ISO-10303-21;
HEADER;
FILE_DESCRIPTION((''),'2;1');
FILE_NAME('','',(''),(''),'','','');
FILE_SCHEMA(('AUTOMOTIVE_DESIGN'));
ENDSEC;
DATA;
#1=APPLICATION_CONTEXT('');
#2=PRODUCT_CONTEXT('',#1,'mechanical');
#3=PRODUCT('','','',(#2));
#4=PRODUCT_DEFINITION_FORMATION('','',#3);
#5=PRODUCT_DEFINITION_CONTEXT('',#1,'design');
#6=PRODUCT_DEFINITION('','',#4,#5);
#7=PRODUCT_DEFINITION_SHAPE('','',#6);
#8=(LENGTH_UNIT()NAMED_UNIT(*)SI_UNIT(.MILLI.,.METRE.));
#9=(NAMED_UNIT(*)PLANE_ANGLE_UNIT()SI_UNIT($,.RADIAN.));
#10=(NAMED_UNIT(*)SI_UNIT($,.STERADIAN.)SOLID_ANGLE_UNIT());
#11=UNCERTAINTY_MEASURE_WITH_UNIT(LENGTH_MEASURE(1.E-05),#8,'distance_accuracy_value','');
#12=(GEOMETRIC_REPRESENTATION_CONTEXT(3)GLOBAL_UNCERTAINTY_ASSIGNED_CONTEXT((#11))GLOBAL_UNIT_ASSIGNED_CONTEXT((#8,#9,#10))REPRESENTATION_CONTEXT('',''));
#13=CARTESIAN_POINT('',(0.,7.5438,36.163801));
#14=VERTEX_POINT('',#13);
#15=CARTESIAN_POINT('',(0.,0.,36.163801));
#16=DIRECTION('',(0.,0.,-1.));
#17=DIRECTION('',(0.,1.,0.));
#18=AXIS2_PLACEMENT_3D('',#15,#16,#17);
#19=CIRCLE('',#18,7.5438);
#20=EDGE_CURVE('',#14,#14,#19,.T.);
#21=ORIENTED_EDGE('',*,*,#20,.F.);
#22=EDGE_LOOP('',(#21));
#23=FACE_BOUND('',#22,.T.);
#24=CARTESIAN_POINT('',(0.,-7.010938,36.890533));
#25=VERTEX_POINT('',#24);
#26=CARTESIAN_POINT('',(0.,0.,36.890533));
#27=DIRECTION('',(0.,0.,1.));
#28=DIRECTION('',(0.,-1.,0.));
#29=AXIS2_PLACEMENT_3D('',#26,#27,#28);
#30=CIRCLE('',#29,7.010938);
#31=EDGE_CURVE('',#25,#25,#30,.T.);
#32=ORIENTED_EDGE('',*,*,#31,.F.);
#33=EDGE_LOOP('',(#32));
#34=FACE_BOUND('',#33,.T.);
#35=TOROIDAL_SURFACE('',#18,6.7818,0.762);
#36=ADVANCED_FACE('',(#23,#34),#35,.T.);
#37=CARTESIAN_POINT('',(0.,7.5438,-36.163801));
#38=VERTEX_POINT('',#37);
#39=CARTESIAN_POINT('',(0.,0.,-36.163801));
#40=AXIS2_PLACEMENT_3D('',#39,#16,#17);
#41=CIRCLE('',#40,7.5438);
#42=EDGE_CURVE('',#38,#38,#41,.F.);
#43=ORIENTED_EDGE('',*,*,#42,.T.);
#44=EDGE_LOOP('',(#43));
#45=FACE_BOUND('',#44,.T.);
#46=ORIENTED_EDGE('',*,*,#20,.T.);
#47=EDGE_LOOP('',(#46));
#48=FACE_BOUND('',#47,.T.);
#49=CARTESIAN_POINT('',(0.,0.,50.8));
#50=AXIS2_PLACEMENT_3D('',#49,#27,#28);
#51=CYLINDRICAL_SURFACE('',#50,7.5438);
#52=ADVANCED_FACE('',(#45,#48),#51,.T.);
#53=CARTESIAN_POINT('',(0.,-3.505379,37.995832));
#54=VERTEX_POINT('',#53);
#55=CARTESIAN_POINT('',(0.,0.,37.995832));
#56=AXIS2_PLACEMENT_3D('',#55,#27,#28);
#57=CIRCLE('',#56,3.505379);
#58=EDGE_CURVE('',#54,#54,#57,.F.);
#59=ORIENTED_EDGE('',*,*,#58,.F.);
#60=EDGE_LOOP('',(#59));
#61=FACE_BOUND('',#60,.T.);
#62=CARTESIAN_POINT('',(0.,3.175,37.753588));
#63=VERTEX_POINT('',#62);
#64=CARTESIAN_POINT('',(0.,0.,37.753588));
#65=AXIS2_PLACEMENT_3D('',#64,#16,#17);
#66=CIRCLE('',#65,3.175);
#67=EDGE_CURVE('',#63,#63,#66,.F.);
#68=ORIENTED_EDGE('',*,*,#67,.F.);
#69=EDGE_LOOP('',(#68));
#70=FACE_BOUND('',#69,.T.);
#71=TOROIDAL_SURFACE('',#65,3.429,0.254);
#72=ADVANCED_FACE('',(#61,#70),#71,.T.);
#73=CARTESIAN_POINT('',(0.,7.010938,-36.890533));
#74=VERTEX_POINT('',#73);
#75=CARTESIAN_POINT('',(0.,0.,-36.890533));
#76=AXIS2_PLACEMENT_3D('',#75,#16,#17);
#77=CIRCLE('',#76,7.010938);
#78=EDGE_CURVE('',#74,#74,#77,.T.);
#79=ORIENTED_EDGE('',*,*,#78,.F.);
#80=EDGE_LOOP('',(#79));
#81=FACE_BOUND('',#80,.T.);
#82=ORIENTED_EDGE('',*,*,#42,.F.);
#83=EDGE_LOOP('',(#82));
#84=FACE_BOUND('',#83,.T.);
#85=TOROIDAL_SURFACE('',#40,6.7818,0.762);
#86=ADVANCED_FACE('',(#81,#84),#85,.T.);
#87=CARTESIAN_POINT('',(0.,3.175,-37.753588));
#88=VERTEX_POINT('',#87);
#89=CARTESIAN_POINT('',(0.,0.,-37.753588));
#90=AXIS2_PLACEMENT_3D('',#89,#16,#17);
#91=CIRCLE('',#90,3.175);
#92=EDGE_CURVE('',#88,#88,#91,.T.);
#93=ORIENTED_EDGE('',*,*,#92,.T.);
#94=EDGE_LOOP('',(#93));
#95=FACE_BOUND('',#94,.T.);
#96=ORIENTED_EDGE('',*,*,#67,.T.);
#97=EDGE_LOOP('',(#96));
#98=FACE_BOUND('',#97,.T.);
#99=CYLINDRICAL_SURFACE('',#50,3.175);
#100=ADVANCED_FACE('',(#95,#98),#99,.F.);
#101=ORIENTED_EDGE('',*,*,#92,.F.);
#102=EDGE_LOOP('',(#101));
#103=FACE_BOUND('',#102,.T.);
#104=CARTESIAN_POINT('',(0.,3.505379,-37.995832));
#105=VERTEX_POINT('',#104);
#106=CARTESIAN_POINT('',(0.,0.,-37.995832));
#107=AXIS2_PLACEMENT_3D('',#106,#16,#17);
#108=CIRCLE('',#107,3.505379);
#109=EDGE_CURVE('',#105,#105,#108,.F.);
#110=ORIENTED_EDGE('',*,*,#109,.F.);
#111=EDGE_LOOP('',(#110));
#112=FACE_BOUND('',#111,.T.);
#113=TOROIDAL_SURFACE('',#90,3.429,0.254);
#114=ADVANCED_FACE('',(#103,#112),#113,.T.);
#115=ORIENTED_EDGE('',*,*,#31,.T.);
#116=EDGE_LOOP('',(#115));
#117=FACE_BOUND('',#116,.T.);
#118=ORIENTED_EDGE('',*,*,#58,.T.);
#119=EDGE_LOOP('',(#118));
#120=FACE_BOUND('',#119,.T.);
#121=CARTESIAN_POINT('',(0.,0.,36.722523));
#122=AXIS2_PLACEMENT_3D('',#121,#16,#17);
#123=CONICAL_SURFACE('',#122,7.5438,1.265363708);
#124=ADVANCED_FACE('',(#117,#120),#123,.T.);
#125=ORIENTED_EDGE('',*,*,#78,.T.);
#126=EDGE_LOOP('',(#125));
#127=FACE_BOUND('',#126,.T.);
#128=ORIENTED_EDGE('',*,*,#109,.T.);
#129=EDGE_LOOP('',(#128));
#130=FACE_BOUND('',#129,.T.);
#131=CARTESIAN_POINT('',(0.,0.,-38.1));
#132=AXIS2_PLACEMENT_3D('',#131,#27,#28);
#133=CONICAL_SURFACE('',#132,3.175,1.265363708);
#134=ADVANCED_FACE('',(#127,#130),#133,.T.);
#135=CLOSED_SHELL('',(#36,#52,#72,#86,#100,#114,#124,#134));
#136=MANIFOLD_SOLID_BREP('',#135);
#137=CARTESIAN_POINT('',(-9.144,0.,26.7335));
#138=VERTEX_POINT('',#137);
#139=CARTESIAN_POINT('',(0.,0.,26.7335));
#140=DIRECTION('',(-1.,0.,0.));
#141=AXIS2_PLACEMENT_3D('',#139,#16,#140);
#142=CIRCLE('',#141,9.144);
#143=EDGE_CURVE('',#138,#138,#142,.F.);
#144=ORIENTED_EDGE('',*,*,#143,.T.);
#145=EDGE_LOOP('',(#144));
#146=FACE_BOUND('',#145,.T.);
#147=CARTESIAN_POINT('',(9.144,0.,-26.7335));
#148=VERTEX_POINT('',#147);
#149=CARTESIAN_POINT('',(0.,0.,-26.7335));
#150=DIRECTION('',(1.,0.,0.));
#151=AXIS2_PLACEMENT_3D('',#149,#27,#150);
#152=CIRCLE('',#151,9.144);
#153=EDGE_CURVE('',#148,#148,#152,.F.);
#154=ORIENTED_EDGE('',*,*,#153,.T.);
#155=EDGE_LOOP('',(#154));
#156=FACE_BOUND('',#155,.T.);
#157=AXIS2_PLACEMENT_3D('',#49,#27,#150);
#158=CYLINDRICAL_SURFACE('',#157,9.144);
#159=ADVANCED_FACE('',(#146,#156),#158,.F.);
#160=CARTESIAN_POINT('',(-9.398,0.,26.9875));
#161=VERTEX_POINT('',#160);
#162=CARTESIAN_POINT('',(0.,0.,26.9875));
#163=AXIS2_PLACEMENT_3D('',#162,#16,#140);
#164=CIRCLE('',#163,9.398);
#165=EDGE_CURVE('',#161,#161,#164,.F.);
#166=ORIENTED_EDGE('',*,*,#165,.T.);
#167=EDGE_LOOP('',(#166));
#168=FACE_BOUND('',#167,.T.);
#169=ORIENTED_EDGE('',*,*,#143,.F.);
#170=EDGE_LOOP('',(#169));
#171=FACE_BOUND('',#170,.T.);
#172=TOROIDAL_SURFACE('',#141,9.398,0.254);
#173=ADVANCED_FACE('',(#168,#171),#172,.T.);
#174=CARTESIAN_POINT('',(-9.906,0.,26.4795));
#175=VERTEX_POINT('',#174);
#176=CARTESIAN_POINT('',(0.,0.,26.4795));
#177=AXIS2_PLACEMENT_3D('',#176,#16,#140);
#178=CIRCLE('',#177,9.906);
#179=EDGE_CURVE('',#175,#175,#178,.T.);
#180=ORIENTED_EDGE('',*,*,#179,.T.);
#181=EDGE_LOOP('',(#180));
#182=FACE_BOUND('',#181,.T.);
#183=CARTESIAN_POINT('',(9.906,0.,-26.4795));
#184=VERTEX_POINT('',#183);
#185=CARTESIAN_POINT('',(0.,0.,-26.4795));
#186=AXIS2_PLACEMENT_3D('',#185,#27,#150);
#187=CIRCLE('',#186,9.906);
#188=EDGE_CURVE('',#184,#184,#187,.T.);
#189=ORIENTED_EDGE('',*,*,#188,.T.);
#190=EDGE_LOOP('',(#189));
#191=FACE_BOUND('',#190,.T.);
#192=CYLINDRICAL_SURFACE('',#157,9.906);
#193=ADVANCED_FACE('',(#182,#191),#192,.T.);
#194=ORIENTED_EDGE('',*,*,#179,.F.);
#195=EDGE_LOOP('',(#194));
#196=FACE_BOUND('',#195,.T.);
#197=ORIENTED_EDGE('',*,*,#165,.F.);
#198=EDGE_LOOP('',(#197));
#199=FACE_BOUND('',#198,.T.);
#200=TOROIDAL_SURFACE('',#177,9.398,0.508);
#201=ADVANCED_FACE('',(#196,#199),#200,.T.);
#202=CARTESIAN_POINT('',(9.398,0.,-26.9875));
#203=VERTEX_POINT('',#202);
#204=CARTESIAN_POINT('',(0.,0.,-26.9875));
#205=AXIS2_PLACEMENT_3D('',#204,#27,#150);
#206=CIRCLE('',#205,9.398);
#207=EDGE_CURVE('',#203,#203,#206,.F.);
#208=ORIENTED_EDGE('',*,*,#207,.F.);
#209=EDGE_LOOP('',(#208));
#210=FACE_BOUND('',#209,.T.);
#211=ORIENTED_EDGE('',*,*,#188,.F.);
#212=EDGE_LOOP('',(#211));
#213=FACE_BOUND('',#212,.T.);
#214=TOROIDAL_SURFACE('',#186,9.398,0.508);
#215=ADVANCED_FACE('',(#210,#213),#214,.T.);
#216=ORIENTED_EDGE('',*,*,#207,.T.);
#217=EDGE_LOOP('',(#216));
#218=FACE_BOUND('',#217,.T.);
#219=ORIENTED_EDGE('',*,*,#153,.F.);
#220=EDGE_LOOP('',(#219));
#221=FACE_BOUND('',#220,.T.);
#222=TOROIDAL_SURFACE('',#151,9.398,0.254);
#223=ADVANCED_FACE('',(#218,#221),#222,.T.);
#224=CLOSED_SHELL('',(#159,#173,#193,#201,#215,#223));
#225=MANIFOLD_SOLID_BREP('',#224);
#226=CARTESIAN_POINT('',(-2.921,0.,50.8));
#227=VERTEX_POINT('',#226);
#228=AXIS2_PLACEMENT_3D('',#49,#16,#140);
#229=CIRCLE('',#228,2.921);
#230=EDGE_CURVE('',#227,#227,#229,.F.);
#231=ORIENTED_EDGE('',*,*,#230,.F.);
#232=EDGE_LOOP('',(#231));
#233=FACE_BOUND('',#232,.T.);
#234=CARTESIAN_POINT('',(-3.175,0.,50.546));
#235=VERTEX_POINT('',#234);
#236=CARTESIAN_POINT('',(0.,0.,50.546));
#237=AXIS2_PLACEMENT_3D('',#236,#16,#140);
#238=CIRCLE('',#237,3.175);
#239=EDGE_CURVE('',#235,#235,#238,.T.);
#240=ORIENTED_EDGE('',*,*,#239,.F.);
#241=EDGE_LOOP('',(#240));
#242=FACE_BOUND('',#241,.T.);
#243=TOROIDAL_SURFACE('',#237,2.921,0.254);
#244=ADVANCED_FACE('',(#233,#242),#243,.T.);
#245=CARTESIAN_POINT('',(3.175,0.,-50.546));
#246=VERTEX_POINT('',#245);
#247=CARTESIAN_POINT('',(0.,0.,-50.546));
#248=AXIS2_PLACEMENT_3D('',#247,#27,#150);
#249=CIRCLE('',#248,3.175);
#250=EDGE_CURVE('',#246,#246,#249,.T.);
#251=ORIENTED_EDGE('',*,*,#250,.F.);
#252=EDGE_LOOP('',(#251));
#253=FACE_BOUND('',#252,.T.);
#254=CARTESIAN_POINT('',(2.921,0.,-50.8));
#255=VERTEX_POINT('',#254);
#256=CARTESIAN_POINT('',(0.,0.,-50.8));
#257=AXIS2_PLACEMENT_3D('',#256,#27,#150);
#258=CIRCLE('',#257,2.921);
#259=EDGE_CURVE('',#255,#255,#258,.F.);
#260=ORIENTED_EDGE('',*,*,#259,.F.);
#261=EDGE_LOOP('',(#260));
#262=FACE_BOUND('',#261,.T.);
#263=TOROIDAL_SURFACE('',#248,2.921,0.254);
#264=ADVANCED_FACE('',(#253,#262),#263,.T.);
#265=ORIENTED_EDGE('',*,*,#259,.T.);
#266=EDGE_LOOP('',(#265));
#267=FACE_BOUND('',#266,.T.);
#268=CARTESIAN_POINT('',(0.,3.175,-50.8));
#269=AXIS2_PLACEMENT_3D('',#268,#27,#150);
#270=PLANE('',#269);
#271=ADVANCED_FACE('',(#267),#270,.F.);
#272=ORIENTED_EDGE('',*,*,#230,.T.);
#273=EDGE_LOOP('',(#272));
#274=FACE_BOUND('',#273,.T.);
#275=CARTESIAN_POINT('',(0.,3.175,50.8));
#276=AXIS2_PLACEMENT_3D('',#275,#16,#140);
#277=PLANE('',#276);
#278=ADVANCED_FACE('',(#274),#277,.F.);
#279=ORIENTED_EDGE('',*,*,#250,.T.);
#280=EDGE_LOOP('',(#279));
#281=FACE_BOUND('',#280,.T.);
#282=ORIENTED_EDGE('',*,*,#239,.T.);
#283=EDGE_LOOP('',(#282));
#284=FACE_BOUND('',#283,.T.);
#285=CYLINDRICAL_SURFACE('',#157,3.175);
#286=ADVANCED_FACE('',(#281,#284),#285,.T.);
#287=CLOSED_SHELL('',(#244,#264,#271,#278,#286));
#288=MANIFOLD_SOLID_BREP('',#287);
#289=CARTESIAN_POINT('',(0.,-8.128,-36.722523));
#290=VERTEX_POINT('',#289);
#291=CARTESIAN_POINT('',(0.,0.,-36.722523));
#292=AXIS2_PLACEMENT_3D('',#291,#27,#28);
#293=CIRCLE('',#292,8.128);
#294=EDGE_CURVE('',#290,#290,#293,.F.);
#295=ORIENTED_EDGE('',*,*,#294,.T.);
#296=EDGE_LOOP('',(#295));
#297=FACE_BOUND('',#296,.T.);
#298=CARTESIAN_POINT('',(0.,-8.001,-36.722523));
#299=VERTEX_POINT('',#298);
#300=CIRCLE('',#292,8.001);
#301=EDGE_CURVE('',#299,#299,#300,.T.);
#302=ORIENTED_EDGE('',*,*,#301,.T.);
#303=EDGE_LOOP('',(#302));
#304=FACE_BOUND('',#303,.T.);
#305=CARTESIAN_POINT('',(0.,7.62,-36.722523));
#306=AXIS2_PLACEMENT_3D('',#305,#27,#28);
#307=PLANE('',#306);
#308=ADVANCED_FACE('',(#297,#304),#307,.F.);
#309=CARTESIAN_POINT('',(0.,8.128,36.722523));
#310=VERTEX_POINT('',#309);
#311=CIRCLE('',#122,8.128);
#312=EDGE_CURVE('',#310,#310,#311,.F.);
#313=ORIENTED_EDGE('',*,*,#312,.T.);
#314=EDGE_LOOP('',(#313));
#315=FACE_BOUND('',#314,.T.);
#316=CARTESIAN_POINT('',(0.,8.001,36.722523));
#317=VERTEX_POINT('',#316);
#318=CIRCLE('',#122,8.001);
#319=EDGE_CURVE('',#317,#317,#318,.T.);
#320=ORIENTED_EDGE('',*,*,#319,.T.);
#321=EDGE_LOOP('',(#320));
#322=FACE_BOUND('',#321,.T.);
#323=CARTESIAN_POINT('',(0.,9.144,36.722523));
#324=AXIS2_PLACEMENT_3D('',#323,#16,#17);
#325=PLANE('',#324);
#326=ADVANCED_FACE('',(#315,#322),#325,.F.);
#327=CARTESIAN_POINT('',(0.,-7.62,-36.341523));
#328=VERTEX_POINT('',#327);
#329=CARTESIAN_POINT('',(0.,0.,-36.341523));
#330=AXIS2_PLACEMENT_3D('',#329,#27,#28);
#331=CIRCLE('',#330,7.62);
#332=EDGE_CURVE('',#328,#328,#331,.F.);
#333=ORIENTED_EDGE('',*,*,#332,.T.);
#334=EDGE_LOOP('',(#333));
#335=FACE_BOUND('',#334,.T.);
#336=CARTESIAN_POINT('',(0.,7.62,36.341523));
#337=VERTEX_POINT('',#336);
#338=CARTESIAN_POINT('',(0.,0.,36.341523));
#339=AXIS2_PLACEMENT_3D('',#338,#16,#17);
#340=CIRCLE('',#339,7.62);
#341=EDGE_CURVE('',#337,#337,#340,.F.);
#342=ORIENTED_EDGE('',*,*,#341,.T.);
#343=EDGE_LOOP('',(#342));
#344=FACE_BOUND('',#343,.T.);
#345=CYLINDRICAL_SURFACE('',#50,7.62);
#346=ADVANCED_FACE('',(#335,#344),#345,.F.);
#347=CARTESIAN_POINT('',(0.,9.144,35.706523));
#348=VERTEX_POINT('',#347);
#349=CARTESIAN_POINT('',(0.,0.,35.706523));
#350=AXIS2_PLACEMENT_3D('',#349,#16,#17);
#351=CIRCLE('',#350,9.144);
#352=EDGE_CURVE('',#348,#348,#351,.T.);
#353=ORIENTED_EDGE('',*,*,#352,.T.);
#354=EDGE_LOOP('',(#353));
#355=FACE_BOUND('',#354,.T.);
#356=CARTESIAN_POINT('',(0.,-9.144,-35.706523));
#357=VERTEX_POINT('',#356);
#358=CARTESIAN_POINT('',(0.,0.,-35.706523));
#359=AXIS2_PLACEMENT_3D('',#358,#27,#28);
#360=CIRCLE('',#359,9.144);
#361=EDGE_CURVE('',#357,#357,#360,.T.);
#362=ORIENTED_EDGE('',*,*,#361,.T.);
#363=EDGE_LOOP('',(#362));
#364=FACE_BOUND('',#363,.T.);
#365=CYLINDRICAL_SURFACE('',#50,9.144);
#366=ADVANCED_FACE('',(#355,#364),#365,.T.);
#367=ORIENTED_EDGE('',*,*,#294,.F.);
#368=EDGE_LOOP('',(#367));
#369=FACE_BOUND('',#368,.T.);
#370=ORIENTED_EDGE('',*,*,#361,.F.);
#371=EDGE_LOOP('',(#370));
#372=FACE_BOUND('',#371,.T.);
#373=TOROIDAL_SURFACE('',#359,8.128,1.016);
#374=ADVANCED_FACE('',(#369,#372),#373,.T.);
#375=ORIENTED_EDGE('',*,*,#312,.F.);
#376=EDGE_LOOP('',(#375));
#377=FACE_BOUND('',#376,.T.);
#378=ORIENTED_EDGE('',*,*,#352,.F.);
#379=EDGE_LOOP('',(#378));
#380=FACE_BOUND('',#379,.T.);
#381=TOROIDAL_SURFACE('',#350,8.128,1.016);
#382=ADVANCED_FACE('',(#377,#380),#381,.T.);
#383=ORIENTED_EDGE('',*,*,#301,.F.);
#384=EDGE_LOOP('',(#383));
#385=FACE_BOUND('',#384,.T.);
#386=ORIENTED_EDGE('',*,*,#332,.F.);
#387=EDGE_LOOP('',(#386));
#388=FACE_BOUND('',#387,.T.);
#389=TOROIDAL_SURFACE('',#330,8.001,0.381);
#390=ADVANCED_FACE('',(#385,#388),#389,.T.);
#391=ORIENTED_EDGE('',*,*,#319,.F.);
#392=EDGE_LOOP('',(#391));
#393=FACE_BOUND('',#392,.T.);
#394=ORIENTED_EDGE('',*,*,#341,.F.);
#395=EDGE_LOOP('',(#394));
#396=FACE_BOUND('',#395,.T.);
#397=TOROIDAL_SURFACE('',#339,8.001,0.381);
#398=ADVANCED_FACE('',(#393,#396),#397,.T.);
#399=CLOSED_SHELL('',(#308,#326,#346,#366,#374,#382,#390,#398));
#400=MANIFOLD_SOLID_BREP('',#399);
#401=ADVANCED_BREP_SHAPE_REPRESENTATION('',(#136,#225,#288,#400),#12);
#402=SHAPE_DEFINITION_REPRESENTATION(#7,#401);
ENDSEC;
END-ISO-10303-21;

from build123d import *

# Parameters (mm, degrees)
SKETCH3_W   = 53.975
SKETCH3_H   = 0.762
SKETCH3_W_2 = 101.6
SKETCH3_H_2 = 3.175
FILLET1_R   = 0.508
SKETCH4_W   = 73.445045302
SKETCH4_H   = 1.524
FILLET2_R   = 0.762
FILLET3_R   = 1.016
FILLET4_R   = 0.254
FILLET5_R   = 0.381
FILLET6_R   = 0.254
FILLET7_R   = 0.254


with BuildPart() as part:
    # Sketch3 → Revolve1 (revolve)
    with BuildSketch(Plane(origin=(0, 0, 0), x_dir=(0, 0, -1), z_dir=(1, 0, 0)), mode=Mode.PRIVATE) as revolve1_sk:
        with Locations((0, 9.525)):
            Rectangle(SKETCH3_W, SKETCH3_H)
        with Locations((0, 1.5875)):
            Rectangle(SKETCH3_W_2, SKETCH3_H_2)
    revolve(revolve1_sk.sketch.rotate(Axis((0, 0, 50.8), (0, 0, -1)), 90), axis=Axis((0, 0, 50.8), (0, 0, -1)))

    # Fillet1
    fillet1_edges = [part.edges().sort_by_distance(p)[0] for p in [
        (-9.906, 0, 26.9875),
        (-9.906, 0, -26.9875),
    ]]
    fillet(fillet1_edges, radius=FILLET1_R)

    # Fillet6
    fillet6_edges = [part.edges().sort_by_distance(p)[0] for p in [
        (-3.175, 0, 50.8),
        (-3.175, 0, -50.8),
    ]]
    fillet(fillet6_edges, radius=FILLET6_R)

    # Fillet7
    fillet7_edges = [part.edges().sort_by_distance(p)[0] for p in [
        (-9.144, 0, -26.9875),
        (-9.144, 0, 26.9875),
    ]]
    fillet(fillet7_edges, radius=FILLET7_R - 0.0001)  # a hair under: the kernel refuses the full size


with BuildPart() as body_2:
    # Sketch4 → Revolve2 (revolve)
    with BuildSketch(Plane(origin=(0, 0, 0), x_dir=(0, 0, -1), z_dir=(1, 0, 0)), mode=Mode.PRIVATE) as revolve2_sk:
        with Locations((0, 8.382)):
            Rectangle(SKETCH4_W, SKETCH4_H)
        Polygon((-38.1, 3.175), (38.1, 3.175), (36.722522651, 7.5438), (-36.722522651, 7.5438), align=None)
    revolve(revolve2_sk.sketch.rotate(Axis((0, 0, 50.8), (0, 0, -1)), 180), axis=Axis((0, 0, 50.8), (0, 0, -1)))

    # Fillet2
    fillet2_edges = [body_2.edges().sort_by_distance(p)[0] for p in [
        (0, 7.5438, -36.722522651),
        (0, 7.5438, 36.722522651),
    ]]
    fillet(fillet2_edges, radius=FILLET2_R)

    # Fillet3
    fillet3_edges = [body_2.edges().sort_by_distance(p)[0] for p in [
        (0, 9.144, 36.722522651),
        (0, 9.144, -36.722522651),
    ]]
    fillet(fillet3_edges, radius=FILLET3_R)

    # Fillet4
    fillet4_edges = [body_2.edges().sort_by_distance(p)[0] for p in [
        (0, 3.175, 38.1),
        (0, 3.175, -38.1),
    ]]
    fillet(fillet4_edges, radius=FILLET4_R)

    # Fillet5
    fillet5_edges = [body_2.edges().sort_by_distance(p)[0] for p in [
        (0, 7.62, -36.722522651),
        (0, 7.62, 36.722522651),
    ]]
    fillet(fillet5_edges, radius=FILLET5_R)


solid = Compound([part.part, body_2.part])
